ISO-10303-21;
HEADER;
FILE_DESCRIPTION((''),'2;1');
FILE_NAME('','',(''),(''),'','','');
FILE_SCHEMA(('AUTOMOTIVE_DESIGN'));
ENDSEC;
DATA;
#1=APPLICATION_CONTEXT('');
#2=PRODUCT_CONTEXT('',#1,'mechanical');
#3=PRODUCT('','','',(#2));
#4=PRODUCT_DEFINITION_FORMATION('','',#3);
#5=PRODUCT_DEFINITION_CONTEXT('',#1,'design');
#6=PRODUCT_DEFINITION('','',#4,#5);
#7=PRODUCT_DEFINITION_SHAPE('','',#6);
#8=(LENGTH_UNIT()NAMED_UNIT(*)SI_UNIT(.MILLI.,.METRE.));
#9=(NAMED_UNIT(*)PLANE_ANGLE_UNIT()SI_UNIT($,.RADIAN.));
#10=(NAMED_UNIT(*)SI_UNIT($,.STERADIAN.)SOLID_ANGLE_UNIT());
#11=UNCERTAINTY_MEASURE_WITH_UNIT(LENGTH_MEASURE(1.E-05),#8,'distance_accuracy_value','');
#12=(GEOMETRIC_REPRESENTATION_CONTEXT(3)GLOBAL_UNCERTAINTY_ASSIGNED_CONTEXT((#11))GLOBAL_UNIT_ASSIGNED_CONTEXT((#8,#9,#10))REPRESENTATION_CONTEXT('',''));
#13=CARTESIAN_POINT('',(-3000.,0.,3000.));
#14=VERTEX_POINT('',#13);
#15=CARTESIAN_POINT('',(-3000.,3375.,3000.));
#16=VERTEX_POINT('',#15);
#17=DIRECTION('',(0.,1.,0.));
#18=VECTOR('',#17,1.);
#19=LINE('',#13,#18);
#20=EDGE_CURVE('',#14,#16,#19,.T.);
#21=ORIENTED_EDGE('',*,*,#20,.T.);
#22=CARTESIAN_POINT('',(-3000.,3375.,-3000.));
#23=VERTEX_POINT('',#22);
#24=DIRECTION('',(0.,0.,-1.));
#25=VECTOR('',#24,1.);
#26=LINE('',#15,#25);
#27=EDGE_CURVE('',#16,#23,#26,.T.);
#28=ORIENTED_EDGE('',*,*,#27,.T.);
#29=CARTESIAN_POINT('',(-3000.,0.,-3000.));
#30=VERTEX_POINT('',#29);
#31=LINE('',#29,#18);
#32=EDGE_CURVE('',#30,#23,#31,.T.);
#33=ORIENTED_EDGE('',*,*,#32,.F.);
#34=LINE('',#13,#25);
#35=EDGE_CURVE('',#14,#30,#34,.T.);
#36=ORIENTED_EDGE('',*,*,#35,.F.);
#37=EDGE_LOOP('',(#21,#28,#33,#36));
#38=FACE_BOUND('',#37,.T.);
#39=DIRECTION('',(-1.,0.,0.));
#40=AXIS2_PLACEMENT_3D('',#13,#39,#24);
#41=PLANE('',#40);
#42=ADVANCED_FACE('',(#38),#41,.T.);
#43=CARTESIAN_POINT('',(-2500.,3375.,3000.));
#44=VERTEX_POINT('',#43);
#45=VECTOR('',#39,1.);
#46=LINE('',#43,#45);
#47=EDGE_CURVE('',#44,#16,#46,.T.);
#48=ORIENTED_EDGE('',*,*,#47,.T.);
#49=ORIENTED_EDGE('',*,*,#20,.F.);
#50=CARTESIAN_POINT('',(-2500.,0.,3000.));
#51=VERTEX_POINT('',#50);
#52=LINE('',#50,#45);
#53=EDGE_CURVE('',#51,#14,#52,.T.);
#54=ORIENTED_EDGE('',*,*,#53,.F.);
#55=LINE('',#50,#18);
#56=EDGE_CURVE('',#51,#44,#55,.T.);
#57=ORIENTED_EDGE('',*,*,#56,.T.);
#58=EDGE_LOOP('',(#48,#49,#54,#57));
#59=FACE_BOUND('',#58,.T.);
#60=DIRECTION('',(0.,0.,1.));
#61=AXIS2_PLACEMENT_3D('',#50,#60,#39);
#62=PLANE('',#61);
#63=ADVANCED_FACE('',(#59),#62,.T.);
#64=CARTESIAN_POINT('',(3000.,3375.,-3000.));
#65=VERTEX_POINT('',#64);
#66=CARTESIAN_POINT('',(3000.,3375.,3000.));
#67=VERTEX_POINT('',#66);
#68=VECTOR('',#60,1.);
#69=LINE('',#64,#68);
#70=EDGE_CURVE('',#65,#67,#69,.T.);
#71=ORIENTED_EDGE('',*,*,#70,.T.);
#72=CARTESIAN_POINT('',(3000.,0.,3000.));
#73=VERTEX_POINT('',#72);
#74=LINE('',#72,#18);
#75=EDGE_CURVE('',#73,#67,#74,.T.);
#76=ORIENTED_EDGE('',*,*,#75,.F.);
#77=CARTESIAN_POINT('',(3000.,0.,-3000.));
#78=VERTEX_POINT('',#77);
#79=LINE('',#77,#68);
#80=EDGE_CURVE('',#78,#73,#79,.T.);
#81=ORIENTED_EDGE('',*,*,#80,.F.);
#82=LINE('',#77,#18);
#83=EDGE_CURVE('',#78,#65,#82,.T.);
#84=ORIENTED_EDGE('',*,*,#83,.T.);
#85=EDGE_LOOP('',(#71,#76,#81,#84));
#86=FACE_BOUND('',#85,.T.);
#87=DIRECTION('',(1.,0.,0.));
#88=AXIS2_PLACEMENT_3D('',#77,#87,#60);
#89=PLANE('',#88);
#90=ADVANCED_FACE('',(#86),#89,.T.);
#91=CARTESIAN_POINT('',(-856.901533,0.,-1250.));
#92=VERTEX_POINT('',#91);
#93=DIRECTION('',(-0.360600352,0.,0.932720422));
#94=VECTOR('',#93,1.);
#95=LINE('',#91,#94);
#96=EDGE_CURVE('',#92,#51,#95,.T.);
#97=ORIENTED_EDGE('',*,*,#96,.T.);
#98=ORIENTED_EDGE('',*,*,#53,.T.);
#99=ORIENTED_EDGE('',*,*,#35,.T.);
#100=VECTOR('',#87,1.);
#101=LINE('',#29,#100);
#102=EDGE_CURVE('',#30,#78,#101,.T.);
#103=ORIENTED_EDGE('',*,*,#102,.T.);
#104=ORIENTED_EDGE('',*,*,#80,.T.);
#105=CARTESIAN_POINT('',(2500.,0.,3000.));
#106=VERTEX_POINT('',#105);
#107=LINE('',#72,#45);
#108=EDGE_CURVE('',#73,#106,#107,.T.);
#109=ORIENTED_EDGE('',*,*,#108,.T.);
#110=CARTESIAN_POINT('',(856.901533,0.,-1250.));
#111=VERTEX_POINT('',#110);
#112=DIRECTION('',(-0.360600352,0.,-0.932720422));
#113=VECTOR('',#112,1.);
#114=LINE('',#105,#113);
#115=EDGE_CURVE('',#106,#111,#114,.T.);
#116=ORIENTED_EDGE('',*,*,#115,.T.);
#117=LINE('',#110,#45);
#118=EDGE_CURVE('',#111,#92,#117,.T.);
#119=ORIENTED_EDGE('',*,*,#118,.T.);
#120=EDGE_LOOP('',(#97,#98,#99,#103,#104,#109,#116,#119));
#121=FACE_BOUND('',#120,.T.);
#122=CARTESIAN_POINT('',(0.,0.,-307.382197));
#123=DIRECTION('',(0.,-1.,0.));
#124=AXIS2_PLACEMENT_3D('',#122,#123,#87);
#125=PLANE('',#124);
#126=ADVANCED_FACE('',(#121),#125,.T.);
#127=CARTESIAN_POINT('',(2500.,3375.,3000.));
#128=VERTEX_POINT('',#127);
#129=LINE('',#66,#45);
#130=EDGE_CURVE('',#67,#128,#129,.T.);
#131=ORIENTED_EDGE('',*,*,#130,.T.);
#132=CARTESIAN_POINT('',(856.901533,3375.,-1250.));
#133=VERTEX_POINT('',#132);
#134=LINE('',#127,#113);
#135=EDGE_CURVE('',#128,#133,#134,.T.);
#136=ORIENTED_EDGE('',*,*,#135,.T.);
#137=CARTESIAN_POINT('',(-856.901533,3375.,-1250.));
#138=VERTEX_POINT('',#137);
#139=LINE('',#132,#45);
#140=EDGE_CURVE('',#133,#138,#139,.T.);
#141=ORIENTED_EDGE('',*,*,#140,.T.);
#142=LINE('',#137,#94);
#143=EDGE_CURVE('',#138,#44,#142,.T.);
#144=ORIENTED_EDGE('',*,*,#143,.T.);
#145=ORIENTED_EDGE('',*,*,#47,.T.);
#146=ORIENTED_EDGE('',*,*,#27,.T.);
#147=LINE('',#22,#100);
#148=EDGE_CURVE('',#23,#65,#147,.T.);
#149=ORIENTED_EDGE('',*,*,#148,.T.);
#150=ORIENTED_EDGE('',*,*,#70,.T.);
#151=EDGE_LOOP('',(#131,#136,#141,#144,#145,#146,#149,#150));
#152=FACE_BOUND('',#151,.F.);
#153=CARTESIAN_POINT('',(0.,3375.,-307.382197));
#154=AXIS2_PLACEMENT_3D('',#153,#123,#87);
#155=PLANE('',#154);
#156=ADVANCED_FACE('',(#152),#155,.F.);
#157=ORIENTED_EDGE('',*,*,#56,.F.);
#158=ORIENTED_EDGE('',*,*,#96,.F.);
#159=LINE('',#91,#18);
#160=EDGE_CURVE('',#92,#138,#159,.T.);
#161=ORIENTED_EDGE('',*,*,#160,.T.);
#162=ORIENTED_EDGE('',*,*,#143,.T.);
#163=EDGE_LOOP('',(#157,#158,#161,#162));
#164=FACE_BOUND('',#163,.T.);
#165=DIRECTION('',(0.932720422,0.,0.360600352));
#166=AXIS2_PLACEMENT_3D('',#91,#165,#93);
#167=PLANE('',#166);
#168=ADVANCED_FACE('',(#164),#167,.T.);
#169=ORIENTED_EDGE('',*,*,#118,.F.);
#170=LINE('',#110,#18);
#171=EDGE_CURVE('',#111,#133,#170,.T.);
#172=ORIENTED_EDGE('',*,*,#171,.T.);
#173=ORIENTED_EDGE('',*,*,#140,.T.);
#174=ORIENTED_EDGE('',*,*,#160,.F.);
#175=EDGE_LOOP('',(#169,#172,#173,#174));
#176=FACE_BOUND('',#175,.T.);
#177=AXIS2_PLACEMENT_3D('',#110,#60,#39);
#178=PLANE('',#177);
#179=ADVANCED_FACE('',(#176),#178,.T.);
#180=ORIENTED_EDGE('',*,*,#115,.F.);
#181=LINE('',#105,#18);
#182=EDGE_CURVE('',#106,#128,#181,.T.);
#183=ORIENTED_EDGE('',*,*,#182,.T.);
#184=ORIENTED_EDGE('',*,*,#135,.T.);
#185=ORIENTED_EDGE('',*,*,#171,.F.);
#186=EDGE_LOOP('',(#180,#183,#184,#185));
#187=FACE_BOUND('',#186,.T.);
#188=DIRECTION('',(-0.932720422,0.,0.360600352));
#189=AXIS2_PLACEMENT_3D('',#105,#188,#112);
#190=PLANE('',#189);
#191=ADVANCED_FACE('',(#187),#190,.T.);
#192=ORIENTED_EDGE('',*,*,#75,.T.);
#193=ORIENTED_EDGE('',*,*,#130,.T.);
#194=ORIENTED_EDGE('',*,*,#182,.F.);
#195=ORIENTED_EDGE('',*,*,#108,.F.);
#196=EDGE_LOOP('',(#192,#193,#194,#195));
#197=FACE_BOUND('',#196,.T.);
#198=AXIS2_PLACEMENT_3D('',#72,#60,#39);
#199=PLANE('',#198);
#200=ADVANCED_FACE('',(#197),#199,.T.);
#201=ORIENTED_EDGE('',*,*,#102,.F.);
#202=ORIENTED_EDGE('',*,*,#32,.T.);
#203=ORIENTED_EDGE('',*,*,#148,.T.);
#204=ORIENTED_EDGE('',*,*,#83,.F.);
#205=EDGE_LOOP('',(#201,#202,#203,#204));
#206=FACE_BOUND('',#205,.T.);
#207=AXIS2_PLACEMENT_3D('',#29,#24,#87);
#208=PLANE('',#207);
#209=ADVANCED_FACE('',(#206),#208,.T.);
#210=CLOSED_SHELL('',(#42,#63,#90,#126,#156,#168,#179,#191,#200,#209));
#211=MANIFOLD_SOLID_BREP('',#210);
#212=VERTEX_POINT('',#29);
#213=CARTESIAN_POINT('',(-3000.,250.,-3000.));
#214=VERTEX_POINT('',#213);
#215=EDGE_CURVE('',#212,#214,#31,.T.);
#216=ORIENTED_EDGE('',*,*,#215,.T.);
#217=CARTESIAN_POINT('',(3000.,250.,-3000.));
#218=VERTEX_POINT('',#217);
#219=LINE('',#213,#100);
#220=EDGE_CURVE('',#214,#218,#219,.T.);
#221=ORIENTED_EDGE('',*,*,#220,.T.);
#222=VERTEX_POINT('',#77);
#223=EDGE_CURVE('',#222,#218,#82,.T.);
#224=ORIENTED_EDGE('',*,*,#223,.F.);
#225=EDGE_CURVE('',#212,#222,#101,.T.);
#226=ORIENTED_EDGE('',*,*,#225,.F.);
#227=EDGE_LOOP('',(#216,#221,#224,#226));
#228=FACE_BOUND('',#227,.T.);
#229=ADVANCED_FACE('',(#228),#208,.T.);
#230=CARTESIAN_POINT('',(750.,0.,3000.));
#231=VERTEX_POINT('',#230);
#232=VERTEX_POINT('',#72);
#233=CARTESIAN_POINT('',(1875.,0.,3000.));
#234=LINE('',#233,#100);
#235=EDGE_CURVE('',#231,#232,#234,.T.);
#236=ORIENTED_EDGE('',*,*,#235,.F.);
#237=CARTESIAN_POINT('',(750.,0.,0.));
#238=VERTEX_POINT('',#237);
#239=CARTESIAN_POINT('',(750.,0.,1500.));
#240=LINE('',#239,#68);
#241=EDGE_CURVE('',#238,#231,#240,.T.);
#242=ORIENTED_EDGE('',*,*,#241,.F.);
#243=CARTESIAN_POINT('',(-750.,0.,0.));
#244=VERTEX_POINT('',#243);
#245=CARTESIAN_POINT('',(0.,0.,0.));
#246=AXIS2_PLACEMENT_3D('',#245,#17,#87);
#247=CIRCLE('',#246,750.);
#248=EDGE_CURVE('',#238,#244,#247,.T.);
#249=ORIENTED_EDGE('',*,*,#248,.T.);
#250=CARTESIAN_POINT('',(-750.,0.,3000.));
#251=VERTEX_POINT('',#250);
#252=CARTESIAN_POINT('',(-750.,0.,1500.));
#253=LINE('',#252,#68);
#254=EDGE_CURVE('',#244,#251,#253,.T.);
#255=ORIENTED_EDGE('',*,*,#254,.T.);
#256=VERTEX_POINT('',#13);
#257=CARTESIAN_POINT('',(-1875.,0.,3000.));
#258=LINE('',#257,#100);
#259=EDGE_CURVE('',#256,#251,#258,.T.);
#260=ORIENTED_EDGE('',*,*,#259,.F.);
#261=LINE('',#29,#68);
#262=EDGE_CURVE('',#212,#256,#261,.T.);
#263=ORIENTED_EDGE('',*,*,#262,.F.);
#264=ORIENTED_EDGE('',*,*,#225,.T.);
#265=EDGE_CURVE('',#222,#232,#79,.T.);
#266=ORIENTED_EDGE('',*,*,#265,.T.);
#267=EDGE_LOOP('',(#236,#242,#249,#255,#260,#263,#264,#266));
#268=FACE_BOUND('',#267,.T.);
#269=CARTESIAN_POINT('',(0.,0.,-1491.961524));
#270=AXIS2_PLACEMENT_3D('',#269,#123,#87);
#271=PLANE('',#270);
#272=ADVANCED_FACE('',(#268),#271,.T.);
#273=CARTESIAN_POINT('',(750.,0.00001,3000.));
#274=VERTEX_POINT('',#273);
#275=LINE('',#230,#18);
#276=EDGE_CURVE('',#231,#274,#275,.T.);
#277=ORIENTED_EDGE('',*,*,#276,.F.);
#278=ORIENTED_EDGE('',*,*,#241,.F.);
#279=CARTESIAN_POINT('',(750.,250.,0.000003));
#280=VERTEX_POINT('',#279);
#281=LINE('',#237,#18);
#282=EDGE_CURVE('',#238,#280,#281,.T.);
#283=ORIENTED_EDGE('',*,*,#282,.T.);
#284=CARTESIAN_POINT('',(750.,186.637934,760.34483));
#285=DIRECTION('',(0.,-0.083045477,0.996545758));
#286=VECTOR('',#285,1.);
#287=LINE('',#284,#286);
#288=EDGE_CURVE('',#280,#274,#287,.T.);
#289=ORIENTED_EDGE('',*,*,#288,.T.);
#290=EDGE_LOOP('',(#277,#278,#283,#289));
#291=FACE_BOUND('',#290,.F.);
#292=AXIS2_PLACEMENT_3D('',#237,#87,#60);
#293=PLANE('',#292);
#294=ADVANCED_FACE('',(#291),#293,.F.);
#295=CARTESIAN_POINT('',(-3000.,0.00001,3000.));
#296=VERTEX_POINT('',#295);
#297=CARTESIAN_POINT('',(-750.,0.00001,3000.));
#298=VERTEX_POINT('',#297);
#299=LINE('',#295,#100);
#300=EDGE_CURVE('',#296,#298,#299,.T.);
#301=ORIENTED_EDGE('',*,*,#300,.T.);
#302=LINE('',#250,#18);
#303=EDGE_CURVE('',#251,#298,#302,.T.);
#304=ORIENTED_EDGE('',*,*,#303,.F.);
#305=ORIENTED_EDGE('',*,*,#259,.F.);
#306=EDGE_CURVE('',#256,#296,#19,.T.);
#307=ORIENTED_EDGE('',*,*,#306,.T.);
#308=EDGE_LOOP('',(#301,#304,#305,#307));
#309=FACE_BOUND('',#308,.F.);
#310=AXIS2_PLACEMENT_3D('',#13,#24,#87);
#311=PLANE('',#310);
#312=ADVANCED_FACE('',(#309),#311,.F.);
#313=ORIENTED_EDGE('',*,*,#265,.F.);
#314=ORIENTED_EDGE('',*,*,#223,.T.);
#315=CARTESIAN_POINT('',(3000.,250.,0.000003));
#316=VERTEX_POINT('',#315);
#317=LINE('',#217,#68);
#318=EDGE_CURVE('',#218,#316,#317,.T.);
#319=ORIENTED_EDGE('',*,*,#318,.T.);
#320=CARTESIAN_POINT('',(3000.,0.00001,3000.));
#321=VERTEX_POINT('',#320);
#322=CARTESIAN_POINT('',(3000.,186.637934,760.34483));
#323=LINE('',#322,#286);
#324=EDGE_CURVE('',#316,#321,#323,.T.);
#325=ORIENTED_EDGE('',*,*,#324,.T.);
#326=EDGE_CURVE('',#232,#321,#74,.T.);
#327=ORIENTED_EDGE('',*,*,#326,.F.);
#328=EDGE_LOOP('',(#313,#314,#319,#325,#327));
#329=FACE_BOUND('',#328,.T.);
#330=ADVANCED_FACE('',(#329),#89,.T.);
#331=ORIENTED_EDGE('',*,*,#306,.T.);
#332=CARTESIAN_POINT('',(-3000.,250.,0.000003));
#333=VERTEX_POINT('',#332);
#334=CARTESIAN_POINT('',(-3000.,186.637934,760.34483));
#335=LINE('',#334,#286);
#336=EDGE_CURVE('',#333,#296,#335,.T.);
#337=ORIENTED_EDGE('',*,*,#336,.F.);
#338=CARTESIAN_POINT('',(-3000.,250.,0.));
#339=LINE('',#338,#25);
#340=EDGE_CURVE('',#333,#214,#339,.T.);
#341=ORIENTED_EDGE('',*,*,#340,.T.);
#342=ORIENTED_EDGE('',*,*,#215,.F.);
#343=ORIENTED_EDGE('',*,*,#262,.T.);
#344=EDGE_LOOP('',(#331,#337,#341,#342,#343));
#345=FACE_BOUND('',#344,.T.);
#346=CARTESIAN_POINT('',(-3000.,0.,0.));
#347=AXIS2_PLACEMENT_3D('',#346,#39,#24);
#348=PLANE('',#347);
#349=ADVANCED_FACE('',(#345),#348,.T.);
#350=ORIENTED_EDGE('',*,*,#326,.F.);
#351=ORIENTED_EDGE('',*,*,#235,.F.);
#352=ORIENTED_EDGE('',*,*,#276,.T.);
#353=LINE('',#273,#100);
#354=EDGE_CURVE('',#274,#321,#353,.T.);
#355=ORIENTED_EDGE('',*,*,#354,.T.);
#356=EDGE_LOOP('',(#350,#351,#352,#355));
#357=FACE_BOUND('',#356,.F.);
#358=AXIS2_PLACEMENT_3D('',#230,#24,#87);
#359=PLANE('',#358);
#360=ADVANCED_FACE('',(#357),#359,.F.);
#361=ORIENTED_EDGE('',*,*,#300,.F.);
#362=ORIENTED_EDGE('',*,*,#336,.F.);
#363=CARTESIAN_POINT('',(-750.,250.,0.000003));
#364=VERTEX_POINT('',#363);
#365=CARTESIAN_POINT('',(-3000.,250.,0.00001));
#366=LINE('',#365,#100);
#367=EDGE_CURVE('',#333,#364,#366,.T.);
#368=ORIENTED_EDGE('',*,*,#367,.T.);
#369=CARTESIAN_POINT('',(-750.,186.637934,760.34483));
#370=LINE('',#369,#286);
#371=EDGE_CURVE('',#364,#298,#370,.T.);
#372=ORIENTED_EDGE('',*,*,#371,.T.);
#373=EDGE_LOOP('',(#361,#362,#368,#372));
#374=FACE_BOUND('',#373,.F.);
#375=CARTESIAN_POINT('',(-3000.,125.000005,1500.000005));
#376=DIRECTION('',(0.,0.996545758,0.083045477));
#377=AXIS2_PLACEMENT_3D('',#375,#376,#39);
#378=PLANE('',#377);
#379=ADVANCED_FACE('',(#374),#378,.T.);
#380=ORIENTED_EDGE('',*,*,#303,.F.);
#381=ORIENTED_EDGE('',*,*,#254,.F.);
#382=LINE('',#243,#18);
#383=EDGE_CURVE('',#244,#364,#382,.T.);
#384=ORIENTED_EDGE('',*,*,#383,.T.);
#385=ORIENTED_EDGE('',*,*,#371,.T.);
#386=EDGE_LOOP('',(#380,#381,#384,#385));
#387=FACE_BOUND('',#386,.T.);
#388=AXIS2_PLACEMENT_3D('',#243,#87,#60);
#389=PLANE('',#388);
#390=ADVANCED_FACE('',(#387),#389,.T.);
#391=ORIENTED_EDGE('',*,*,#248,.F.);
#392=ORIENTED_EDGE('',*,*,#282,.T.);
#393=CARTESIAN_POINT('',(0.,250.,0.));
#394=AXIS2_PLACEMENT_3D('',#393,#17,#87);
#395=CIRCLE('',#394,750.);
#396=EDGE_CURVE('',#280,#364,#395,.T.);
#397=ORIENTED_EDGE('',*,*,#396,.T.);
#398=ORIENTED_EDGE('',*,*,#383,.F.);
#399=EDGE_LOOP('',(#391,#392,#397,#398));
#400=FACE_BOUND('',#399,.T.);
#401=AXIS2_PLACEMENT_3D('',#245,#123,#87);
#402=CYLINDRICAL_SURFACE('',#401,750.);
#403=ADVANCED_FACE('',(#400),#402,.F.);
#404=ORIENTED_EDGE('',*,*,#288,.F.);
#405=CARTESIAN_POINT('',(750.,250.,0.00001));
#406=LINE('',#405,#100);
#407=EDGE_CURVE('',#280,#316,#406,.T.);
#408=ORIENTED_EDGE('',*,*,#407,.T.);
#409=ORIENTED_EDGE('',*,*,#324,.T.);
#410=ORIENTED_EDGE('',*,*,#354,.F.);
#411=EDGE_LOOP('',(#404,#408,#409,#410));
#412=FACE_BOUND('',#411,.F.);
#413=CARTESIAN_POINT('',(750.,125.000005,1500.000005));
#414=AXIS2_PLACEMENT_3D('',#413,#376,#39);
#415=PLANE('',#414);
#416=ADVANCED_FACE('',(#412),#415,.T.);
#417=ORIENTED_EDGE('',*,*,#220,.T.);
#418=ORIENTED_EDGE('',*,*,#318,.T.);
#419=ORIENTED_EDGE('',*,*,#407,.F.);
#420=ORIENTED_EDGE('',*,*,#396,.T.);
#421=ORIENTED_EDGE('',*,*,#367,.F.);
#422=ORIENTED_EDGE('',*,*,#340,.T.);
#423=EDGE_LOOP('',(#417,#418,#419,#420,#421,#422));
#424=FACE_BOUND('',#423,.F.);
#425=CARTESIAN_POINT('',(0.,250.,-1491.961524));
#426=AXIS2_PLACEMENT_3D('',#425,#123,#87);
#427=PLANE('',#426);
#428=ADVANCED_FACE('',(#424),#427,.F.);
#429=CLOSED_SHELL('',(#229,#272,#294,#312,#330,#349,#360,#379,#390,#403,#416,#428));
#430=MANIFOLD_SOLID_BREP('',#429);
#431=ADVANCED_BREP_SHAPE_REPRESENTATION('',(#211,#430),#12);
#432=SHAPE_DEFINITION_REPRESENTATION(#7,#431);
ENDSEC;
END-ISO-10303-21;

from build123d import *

# Parameters (mm, degrees)
F1_DEPTH = 3375
F2_W     = 2250
F2_H     = 3000
F3_DEPTH = 250
F4_SIZE2 = 249.99999
F4_SIZE  = 2999.99999
F5_SIZE2 = 249.99999
F5_SIZE  = 2999.99999
F6_DEPTH = 250


# Not quite as in the source:
# - a fillet or chamfer is up to 0.001 mm smaller than in the source, because OpenCascade refuses the exact size


with BuildPart() as f1:
    # F0 (on Front) → F1 (new body)
    with BuildSketch(Plane.XZ):
        Polygon((3000, -3000), (3000, 3000), (2500, 3000), (856.9015333837, -1250), (-856.9015333837, -1250), (-2500, 3000), (-3000, 3000), (-3000, -3000), align=None)
    extrude(amount=-F1_DEPTH)


with BuildPart() as f3:
    # F2 (on Front) → F3 (new body)
    with BuildSketch(Plane.XZ):
        with Locations((1875, 1500)):
            Rectangle(F2_W, F2_H)
    extrude(amount=-F3_DEPTH)

    # F4 (size 3000 and 250 in the source; OpenCascade refuses exactly that, so slightly less here)
    f4_edges = [f3.edges().sort_by_distance(p)[0] for p in [
        (1875, 250, 3000),
    ]]
    f4_side = f3.faces().sort_by_distance((1875, 250, 1500))[0]
    chamfer(f4_edges, length=F4_SIZE, length2=F4_SIZE2, reference=f4_side)



with BuildPart() as f3b:
    # F2 (on Front) → F3, piece 2 (new body)
    with BuildSketch(Plane.XZ):
        with Locations((-1875, 1500)):
            Rectangle(F2_W, F2_H)
    extrude(amount=-F3_DEPTH)

    # F5 (size 3000 and 250 in the source; OpenCascade refuses exactly that, so slightly less here)
    f5_edges = [f3b.edges().sort_by_distance(p)[0] for p in [
        (-1875, 250, 3000),
    ]]
    f5_side = f3b.faces().sort_by_distance((-1875, 250, 1500))[0]
    chamfer(f5_edges, length=F5_SIZE, length2=F5_SIZE2, reference=f5_side)


with BuildPart() as f3_1:
    add(f3.part)

    add(f3b.part)  # F6 merges F3b
    # F2 (on Front) → F6 (join)
    with BuildSketch(Plane.XZ):
        with BuildLine():
            Line((-3000, 0), (-3000, -3000))
            Line((-3000, -3000), (3000, -3000))
            Line((3000, -3000), (3000, 0))
            Line((3000, 0), (750, 0))
            ThreePointArc((750, 0), (0, -750), (-750, 0))
            Line((-750, 0), (-3000, 0))
        make_face()
    extrude(amount=-F6_DEPTH)


solid = Compound([f1.part, f3_1.part])
